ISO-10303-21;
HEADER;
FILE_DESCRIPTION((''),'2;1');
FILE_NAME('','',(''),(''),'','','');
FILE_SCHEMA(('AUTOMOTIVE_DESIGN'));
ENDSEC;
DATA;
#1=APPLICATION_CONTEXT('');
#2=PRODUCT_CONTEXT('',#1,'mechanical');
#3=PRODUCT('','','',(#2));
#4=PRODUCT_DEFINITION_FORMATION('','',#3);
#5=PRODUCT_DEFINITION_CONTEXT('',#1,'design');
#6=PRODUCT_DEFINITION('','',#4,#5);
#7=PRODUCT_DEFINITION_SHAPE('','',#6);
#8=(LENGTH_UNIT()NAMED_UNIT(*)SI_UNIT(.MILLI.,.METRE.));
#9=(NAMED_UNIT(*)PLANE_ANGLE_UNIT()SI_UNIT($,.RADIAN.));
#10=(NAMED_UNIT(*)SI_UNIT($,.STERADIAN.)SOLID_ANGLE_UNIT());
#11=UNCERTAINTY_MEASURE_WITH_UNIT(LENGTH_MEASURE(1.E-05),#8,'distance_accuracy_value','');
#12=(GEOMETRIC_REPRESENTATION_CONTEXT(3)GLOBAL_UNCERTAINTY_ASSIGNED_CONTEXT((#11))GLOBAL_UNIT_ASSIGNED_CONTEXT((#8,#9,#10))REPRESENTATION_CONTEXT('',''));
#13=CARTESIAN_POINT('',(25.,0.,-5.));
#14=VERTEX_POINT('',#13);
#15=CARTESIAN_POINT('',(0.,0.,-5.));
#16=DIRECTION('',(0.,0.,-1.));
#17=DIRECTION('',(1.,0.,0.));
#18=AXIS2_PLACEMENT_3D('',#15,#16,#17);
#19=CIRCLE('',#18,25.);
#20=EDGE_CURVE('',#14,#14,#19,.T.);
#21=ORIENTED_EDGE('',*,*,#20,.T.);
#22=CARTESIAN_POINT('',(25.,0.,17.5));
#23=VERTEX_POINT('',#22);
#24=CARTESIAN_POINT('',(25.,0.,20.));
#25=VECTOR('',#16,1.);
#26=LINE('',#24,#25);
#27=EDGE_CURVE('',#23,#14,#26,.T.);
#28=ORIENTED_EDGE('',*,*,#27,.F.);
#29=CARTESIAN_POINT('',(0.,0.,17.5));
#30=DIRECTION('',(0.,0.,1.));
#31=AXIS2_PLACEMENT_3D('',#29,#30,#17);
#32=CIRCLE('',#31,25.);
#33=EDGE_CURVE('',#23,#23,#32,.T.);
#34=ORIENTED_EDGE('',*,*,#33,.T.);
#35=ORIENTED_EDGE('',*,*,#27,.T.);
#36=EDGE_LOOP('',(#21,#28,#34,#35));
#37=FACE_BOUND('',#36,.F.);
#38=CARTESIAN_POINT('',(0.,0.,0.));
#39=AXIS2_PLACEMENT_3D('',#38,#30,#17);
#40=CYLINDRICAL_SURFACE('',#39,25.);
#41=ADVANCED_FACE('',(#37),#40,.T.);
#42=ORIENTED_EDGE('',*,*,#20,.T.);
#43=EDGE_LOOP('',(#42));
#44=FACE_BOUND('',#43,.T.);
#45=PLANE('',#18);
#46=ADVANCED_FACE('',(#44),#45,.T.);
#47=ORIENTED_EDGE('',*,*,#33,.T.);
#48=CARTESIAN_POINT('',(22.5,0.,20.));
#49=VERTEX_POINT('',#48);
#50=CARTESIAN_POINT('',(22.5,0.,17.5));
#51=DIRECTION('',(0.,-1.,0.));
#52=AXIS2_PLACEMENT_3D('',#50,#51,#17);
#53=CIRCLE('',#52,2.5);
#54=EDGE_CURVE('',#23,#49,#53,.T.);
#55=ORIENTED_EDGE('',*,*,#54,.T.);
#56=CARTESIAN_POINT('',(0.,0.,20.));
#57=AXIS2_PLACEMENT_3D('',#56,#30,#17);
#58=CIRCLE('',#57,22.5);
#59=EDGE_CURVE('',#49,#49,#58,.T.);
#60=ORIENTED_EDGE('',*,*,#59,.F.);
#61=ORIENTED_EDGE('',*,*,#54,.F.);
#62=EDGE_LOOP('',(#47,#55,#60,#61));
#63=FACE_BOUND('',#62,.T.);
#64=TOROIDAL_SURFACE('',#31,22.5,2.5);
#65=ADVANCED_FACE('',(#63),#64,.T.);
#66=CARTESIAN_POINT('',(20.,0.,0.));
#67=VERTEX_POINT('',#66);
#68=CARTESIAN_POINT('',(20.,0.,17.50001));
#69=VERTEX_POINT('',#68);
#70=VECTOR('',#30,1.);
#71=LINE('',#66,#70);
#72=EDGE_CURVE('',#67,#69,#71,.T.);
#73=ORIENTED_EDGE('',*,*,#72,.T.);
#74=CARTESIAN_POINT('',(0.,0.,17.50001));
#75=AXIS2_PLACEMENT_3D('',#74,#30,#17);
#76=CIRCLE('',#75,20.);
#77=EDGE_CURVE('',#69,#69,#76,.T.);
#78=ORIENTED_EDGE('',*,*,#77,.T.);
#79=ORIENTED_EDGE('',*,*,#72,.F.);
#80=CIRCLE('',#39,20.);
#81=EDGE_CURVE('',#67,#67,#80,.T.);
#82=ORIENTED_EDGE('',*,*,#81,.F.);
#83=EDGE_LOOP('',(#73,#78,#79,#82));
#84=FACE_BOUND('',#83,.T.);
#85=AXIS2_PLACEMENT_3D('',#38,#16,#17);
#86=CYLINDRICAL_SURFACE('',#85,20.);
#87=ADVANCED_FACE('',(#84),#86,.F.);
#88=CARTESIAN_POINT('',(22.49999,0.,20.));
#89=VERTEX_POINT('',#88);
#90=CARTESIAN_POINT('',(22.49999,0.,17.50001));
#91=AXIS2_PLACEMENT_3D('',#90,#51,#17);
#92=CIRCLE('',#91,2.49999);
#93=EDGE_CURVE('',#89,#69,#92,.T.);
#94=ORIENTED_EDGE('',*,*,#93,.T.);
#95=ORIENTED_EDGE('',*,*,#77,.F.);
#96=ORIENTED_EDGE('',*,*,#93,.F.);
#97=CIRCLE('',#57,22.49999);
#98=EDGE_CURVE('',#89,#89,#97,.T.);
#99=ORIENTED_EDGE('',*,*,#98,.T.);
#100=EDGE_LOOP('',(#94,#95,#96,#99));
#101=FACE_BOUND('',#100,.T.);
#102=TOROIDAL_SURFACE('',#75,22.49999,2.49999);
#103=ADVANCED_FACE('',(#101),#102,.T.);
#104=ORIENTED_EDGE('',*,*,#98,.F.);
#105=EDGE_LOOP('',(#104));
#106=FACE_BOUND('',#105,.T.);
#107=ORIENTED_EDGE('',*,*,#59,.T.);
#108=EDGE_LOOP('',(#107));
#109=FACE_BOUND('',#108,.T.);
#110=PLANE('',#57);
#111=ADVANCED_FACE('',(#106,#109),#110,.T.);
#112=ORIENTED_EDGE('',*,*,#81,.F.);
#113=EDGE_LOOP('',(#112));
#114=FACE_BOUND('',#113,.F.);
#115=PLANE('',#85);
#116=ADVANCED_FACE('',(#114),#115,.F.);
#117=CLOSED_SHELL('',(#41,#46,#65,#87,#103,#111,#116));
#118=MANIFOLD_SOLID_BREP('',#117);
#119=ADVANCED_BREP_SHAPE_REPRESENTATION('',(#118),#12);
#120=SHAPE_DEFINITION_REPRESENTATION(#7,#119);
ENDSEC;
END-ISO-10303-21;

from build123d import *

# Parameters (mm, degrees)
F0_R     = 25
F0_R_2   = 20
F1_DEPTH = 20
F2_R     = 25
F3_DEPTH = 5
F4_R     = 2.5
F5_R     = 2.49999


# Not quite as in the source:
# - a fillet or chamfer is up to 0.001 mm smaller than in the source, because OpenCascade refuses the exact size


with BuildPart() as f1:
    # F0 (on Top) → F1 (new body)
    with BuildSketch(Plane.XY):
        Circle(F0_R)
        Circle(F0_R_2, mode=Mode.SUBTRACT)
    extrude(amount=F1_DEPTH)

    # F2 (on face) → F3 (join)
    with BuildSketch(Plane(origin=(0, 0, 0), x_dir=(1, 0, 0), z_dir=(0, 0, -1))):
        Circle(F2_R)
    extrude(amount=F3_DEPTH)

    # F4
    f4_edges = [f1.edges().sort_by_distance(p)[0] for p in [
        (-25, 0, 20),
    ]]
    fillet(f4_edges, radius=F4_R)

    # F5 (radius 2.5 in the source; OpenCascade refuses exactly that, so slightly less here)
    f5_edges = [f1.edges().sort_by_distance(p)[0] for p in [
        (-20, 0, 20),
    ]]
    fillet(f5_edges, radius=F5_R)


solid = f1.part
